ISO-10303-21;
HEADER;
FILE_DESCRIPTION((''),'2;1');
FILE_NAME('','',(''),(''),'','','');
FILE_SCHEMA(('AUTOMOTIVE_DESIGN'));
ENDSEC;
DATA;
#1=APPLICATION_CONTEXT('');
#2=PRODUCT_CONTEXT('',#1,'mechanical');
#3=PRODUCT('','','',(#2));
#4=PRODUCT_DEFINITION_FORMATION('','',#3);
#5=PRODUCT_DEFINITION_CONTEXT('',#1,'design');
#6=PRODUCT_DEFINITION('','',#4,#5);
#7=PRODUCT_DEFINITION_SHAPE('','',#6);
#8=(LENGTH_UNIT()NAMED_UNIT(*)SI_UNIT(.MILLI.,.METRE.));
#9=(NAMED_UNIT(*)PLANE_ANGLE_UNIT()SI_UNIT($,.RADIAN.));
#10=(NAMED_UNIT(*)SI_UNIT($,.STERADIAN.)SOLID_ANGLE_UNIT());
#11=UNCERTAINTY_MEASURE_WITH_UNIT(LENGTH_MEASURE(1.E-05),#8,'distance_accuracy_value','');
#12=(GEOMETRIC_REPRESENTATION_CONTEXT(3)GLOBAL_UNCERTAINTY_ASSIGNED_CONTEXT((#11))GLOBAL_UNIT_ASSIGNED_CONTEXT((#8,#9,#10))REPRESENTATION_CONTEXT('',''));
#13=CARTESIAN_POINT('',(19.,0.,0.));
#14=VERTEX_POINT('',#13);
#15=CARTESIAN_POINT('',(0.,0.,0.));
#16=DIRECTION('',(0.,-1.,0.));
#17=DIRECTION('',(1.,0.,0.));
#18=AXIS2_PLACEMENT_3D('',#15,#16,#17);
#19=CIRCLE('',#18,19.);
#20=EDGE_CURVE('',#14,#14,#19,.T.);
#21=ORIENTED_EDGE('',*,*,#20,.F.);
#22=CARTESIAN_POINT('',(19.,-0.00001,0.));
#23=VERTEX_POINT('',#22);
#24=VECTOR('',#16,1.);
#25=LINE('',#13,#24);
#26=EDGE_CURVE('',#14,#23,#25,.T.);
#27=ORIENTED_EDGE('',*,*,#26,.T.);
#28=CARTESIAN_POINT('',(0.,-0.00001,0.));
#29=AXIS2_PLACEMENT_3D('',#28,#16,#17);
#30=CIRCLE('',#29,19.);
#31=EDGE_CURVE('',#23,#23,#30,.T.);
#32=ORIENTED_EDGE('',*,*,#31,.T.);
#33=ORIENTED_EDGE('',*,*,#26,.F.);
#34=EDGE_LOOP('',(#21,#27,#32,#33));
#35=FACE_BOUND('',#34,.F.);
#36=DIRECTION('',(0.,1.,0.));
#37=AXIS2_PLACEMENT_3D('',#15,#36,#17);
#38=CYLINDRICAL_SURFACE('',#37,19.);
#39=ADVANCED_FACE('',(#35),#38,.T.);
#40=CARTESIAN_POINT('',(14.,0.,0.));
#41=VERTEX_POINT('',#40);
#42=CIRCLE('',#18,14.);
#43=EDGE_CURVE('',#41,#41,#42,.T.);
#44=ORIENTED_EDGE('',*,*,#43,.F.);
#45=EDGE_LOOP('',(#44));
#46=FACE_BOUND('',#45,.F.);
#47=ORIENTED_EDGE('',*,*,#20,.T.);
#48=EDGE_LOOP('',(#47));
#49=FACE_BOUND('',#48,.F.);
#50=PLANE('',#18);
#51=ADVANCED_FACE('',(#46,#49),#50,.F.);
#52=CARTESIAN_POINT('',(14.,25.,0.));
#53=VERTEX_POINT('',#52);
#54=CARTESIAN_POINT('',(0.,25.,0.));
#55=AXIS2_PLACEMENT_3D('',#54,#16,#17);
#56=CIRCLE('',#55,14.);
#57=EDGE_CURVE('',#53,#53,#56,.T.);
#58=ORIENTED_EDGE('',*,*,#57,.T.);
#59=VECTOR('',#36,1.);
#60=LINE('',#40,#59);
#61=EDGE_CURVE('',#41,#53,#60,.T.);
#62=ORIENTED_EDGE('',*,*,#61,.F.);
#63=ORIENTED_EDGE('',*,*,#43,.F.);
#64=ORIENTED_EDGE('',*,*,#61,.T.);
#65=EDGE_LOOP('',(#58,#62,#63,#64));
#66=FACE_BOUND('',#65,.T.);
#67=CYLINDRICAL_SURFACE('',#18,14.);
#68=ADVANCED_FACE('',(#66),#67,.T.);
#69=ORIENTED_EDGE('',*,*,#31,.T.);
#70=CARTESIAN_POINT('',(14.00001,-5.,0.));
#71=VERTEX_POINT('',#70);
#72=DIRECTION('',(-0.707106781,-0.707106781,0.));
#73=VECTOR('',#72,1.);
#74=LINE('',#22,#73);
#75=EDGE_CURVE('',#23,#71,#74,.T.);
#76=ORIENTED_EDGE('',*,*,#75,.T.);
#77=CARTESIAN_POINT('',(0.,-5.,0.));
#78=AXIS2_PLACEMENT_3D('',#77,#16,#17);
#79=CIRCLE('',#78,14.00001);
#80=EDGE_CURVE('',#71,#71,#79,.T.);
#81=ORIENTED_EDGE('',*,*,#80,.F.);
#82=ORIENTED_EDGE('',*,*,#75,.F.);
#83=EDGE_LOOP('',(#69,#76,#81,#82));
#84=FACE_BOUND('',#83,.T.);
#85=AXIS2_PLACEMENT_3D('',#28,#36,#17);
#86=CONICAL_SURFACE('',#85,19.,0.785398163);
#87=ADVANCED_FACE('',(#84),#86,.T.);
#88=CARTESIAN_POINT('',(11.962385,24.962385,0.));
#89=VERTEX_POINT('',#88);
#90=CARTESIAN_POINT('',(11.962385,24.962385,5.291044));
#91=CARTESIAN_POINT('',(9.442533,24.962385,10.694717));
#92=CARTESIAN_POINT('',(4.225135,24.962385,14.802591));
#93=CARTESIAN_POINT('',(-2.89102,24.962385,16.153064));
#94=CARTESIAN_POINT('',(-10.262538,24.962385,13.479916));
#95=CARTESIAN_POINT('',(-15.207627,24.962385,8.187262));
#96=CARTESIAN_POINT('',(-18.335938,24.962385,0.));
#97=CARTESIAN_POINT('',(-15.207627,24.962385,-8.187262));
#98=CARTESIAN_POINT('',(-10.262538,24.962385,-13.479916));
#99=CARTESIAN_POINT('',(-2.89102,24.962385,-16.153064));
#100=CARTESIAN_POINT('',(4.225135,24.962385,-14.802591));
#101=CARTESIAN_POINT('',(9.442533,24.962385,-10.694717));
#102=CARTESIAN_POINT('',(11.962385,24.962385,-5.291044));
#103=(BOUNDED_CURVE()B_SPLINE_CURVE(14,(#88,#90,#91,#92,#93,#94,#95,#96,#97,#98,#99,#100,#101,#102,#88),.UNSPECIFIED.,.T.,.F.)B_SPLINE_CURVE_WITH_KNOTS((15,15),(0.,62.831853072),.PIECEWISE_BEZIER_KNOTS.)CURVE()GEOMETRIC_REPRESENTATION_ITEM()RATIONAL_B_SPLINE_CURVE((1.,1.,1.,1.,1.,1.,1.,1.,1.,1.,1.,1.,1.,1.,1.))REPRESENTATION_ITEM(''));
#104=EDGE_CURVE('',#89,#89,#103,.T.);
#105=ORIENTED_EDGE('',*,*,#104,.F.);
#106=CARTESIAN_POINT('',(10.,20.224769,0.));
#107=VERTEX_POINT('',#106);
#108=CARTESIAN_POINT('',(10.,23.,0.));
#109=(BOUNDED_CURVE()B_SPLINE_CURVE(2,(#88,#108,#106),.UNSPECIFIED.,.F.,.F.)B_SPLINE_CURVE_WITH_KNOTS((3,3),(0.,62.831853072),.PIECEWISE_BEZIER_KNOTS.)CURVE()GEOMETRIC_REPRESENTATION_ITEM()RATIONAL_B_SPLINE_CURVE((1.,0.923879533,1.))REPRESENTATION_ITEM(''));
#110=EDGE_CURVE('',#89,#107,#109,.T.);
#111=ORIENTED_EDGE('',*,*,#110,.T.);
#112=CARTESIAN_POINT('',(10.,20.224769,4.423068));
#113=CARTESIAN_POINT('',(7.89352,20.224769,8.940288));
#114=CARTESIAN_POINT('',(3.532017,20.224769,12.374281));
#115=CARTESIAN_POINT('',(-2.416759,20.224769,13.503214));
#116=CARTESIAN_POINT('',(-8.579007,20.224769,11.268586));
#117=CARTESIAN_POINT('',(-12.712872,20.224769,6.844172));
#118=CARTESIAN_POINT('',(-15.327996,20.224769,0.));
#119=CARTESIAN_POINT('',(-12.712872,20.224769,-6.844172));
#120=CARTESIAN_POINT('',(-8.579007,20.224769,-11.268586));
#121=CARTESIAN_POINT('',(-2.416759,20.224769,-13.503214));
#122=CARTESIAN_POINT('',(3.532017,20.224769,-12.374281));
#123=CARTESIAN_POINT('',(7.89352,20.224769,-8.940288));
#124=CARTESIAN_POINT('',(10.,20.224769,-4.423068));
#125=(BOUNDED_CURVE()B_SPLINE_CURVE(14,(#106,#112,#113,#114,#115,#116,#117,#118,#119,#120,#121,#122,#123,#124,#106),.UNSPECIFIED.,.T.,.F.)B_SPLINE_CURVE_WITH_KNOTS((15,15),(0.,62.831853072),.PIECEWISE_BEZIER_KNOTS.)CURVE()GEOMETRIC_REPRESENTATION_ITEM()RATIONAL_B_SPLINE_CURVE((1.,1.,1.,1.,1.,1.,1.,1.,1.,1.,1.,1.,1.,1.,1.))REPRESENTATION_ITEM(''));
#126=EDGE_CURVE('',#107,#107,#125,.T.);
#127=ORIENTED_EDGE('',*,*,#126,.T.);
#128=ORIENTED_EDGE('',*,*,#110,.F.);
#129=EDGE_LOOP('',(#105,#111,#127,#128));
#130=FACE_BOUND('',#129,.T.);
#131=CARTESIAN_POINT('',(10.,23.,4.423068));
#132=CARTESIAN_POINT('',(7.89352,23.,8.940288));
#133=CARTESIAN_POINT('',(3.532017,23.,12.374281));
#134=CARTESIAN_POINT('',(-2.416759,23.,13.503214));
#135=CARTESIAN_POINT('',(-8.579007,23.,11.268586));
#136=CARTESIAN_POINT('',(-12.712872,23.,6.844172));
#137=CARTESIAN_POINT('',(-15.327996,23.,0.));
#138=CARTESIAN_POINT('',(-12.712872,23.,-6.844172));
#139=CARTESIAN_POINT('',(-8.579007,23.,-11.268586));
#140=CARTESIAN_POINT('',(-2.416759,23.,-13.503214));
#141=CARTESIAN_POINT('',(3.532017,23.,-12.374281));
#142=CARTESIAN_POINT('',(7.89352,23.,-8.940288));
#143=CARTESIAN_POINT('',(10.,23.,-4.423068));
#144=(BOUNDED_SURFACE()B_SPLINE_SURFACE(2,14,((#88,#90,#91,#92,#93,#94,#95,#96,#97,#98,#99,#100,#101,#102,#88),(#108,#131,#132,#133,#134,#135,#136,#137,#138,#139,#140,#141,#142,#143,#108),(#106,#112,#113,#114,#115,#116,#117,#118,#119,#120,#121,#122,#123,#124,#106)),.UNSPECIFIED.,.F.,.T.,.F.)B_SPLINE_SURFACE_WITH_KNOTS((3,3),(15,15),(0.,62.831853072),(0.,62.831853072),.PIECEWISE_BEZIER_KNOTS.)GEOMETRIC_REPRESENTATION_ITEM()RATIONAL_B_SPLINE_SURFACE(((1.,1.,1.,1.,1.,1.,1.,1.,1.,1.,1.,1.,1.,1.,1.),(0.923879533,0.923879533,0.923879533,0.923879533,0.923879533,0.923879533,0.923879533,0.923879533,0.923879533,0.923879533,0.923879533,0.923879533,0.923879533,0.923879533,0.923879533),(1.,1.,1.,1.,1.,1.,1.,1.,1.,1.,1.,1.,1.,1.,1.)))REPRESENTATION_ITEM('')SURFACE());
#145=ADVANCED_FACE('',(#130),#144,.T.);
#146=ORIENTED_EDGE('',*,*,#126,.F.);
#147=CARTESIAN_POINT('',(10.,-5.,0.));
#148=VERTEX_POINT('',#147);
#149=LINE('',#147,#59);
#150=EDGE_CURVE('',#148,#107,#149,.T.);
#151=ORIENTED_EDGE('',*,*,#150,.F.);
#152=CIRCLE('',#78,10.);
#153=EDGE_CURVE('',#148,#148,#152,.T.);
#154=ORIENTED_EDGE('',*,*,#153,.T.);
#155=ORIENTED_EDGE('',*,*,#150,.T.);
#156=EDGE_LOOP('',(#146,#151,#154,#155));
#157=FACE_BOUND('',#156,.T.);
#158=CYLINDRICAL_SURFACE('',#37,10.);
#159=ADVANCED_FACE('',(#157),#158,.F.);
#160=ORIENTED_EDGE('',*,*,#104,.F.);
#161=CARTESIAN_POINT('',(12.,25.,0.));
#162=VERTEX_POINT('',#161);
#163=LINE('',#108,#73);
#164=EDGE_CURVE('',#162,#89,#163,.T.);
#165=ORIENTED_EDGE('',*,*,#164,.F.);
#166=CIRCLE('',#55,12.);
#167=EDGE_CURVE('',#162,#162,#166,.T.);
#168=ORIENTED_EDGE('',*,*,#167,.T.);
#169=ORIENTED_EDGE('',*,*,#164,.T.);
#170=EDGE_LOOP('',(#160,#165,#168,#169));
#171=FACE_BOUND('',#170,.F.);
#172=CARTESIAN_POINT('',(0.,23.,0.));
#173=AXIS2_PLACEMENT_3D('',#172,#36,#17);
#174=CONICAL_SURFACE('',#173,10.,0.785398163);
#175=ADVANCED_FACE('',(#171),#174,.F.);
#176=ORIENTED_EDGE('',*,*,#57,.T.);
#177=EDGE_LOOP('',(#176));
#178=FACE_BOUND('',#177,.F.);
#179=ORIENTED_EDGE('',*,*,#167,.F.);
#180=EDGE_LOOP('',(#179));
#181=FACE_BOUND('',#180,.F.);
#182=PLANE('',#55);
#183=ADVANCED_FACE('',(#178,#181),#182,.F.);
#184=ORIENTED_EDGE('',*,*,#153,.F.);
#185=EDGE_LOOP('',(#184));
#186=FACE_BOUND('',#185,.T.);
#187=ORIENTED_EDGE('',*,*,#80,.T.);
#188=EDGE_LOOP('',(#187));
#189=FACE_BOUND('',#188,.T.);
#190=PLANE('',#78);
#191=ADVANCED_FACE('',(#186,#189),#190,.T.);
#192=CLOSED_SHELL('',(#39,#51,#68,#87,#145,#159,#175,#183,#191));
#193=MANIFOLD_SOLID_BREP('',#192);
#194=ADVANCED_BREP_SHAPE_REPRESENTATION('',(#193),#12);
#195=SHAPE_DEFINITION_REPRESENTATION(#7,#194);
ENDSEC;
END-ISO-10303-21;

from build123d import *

# Parameters (mm, degrees)
F0_R     = 19
F0_R_2   = 14
F0_R_3   = 10
F1_DEPTH = 5
F2_DEPTH = 25
F3_SIZE  = 4.99999
F4_SIZE  = 2
F5_R     = 6.7


# Not quite as in the source:
# - a fillet or chamfer is up to 0.001 mm smaller than in the source, because OpenCascade refuses the exact size


with BuildPart() as f1:
    # F0 (on Front) → F1 (new body)
    with BuildSketch(Plane.XZ):
        Circle(F0_R)
        Circle(F0_R_2, mode=Mode.SUBTRACT)
        Circle(F0_R_2)
        Circle(F0_R_3, mode=Mode.SUBTRACT)
    extrude(amount=F1_DEPTH)

    # F0 (on Front) → F2 (join)
    with BuildSketch(Plane.XZ):
        Circle(F0_R_2)
        Circle(F0_R_3, mode=Mode.SUBTRACT)
    extrude(amount=-F2_DEPTH)

    # F3 (size 5 in the source; OpenCascade refuses exactly that, so slightly less here)
    f3_edges = [f1.edges().sort_by_distance(p)[0] for p in [
        (-19, -5, 0),
    ]]
    chamfer(f3_edges, length=F3_SIZE)

    # F4
    f4_edges = [f1.edges().sort_by_distance(p)[0] for p in [
        (-10, 25, 0),
    ]]
    chamfer(f4_edges, length=F4_SIZE)

    # F5
    f5_edges = [f1.edges().sort_by_distance(p)[0] for p in [
        (-10, 23, 0),
    ]]
    fillet(f5_edges, radius=F5_R)


solid = f1.part
